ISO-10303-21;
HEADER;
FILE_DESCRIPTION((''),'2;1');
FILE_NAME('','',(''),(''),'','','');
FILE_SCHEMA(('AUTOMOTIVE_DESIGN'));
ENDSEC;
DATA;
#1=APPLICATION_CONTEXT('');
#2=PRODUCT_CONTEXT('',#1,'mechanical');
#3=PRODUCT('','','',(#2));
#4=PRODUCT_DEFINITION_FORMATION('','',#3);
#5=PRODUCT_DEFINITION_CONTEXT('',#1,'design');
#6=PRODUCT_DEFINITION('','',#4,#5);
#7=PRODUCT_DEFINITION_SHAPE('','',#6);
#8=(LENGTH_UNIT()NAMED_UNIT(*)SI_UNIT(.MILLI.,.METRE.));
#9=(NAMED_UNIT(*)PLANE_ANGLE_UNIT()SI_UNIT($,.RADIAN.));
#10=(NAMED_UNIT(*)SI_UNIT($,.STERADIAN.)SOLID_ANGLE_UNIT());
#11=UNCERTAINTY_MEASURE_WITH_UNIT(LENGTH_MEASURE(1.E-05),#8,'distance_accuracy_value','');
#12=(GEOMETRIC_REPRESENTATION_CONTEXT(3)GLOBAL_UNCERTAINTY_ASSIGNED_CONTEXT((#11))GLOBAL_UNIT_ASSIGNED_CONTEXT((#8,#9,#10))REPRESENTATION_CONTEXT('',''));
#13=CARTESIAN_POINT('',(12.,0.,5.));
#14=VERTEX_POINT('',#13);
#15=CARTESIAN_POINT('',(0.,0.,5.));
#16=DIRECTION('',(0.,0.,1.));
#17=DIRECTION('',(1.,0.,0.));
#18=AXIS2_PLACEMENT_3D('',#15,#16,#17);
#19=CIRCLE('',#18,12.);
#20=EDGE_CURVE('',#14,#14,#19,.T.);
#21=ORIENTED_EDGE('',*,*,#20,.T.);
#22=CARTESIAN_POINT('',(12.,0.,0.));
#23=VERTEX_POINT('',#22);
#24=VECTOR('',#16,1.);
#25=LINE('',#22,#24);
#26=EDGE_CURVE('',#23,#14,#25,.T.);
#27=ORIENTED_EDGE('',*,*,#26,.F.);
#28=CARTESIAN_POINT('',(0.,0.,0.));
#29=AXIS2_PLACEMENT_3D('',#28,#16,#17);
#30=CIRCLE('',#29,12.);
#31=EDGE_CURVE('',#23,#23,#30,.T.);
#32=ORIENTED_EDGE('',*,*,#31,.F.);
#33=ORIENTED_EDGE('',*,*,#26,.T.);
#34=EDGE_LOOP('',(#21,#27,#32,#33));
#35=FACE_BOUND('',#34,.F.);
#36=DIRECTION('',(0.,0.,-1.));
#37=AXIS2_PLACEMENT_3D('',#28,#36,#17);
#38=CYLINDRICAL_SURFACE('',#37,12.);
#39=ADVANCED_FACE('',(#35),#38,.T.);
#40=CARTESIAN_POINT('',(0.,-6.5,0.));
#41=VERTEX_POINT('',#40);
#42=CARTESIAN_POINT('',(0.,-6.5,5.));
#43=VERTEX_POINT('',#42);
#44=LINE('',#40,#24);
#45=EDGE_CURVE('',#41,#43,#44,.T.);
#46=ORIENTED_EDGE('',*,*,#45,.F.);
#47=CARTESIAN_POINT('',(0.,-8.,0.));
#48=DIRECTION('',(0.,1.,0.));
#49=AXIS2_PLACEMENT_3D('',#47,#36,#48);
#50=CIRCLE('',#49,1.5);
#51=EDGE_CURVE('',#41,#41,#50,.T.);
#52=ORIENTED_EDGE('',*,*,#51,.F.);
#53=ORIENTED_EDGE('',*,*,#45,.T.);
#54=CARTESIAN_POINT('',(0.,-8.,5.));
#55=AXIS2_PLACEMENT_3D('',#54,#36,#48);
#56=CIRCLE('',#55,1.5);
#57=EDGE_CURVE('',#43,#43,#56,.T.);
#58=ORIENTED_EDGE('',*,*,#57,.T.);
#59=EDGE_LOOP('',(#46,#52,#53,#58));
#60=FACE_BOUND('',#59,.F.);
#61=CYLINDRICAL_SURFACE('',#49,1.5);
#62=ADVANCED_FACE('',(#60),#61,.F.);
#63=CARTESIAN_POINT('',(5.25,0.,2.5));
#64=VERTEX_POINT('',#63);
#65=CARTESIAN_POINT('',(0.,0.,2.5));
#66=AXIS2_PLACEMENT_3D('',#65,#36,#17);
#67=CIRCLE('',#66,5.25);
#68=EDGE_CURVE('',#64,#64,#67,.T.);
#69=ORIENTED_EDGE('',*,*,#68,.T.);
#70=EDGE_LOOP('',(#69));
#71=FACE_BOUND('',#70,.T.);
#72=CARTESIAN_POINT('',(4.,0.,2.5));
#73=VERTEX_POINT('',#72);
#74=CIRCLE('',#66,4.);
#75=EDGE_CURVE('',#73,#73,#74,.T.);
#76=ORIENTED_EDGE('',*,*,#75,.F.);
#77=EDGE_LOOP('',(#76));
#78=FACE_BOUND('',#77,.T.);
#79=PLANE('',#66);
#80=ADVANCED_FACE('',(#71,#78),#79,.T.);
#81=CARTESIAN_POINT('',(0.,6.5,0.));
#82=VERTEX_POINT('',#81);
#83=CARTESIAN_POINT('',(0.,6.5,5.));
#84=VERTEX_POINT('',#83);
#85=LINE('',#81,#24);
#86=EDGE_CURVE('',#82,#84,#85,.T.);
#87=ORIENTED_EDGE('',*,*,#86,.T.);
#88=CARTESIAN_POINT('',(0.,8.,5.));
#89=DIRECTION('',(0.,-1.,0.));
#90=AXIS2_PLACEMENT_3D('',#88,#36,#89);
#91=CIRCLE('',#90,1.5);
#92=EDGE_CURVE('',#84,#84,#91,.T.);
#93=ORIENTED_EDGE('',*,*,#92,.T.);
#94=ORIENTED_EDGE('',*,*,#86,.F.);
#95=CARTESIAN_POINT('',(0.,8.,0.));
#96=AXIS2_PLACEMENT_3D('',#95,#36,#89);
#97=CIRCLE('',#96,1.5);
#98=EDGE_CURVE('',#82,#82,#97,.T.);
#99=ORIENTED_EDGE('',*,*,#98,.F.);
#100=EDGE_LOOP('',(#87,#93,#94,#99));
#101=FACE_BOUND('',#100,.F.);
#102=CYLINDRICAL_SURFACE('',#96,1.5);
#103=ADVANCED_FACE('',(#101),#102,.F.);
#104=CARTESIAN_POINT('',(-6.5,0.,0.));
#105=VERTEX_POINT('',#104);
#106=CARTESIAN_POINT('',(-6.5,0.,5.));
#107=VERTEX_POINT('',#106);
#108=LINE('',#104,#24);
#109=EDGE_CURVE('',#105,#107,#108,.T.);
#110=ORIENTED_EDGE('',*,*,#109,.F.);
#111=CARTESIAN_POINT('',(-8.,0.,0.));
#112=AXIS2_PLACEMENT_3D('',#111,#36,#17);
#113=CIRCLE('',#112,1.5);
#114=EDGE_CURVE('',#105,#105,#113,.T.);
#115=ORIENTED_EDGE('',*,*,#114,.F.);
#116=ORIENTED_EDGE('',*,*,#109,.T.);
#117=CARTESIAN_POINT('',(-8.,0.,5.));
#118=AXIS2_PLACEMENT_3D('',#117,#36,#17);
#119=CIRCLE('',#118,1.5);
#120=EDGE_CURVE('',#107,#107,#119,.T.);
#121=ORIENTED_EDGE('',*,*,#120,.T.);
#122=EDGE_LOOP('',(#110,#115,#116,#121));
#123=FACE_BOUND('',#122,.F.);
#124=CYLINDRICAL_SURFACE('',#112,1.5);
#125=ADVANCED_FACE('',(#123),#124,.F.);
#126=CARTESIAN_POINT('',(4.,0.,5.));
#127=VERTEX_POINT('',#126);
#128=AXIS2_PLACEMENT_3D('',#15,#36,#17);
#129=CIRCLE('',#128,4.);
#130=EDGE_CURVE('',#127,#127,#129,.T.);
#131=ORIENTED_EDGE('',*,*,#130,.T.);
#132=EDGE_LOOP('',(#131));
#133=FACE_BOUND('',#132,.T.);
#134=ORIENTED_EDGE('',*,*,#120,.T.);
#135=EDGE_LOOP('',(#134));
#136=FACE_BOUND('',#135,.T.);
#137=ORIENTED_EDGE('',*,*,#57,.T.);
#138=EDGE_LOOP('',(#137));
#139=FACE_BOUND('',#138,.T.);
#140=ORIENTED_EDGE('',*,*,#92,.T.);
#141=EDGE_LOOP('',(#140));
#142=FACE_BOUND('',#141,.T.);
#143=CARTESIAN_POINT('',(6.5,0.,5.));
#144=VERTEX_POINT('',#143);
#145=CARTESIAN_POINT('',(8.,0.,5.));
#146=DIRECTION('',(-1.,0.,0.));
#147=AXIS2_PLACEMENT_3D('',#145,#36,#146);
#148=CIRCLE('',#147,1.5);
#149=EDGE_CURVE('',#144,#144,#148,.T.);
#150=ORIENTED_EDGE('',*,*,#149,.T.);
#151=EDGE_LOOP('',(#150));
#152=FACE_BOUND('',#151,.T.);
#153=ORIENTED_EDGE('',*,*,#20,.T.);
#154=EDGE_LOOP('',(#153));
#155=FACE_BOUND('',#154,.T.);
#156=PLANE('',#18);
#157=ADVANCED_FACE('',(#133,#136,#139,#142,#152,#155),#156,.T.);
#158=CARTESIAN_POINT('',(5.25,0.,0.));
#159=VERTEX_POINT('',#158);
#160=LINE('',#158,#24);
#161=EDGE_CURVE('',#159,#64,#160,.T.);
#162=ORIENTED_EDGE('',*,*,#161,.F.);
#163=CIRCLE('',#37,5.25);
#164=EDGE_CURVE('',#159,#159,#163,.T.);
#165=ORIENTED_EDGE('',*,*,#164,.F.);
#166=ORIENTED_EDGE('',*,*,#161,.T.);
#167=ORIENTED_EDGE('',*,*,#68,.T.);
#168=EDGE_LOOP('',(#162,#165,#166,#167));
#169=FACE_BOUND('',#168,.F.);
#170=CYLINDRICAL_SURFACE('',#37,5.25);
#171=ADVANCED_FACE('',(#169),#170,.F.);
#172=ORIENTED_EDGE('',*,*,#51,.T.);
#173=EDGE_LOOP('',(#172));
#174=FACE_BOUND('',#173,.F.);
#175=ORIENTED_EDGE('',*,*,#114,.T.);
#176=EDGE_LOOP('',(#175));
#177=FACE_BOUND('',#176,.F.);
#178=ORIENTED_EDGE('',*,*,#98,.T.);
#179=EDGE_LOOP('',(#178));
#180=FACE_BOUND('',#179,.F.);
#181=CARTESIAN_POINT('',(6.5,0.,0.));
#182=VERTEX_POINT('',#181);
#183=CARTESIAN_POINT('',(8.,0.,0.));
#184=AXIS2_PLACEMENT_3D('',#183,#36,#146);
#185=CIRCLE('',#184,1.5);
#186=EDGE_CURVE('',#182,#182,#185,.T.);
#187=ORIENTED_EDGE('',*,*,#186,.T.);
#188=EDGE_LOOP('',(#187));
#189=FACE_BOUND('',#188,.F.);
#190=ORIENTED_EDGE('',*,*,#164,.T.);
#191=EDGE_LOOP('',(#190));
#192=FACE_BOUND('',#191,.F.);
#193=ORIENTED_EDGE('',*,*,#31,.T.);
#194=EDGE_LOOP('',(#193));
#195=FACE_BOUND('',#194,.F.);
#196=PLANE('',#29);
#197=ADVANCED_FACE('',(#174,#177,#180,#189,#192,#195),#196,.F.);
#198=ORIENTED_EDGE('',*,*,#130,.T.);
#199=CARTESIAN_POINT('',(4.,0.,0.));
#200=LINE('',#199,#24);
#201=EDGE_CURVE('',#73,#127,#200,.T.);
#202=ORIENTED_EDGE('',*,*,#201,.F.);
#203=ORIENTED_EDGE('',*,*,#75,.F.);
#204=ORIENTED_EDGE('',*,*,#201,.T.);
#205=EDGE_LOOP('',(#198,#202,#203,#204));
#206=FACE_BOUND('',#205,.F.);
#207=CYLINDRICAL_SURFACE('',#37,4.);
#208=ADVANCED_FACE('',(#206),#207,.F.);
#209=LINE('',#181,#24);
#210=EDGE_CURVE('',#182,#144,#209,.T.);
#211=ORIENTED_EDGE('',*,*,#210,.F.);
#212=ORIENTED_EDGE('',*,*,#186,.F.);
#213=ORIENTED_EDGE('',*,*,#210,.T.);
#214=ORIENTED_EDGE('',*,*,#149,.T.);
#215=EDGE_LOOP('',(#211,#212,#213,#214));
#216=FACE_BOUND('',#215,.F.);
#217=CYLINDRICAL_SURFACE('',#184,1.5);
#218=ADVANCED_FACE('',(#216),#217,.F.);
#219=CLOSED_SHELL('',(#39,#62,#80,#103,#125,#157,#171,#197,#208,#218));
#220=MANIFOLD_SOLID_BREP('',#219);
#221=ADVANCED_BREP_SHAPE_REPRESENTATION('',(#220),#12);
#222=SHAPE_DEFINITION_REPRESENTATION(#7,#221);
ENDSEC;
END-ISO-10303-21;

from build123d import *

# Parameters (mm, degrees)
F0_R            = 12
F1_DEPTH        = 5
F2_R            = 4
F3_DEPTH        = 5
F5_R            = 1.5
F6_DEPTH        = 5
F6_COPIES_COUNT = 4
F4_R            = 5.25
F7_DEPTH        = 2.5


# Not quite as in the source:
# - a pattern or mirror of a feature is missing from the dataset's text; its kind, count and spacing are read off the source's solid


with BuildPart() as f1:
    # F0 (on Top) → F1 (new body)
    with BuildSketch(Plane.XY):
        Circle(F0_R)
    extrude(amount=F1_DEPTH)

    # F2 (on face) → F3 (cut, through all)
    with BuildSketch(Plane(origin=(0, 0, 0), x_dir=(1, 0, 0), z_dir=(0, 0, -1))):
        Circle(F2_R)
    extrude(amount=-F3_DEPTH, mode=Mode.SUBTRACT)

    # F5 (on face) → F6 (cut, through all)
    with BuildSketch(Plane(origin=(0, 0, 0), x_dir=(1, 0, 0), z_dir=(0, 0, -1))):
        with Locations((-8, 0)):
            Circle(F5_R)
    f6 = extrude(amount=-F6_DEPTH, mode=Mode.SUBTRACT)

    # F6_copies: F6 ×4 about axis
    f6_copies_axis = Axis((0, 0, 0), (0, 0, 1))
    for i in range(1, F6_COPIES_COUNT):
        add(f6.rotate(f6_copies_axis, i * 360 / F6_COPIES_COUNT), mode=Mode.SUBTRACT)

    # F4 (on face) → F7 (cut)
    with BuildSketch(Plane(origin=(0, 0, 0), x_dir=(1, 0, 0), z_dir=(0, 0, -1))):
        Circle(F4_R)
    extrude(amount=-F7_DEPTH, mode=Mode.SUBTRACT)


solid = f1.part
